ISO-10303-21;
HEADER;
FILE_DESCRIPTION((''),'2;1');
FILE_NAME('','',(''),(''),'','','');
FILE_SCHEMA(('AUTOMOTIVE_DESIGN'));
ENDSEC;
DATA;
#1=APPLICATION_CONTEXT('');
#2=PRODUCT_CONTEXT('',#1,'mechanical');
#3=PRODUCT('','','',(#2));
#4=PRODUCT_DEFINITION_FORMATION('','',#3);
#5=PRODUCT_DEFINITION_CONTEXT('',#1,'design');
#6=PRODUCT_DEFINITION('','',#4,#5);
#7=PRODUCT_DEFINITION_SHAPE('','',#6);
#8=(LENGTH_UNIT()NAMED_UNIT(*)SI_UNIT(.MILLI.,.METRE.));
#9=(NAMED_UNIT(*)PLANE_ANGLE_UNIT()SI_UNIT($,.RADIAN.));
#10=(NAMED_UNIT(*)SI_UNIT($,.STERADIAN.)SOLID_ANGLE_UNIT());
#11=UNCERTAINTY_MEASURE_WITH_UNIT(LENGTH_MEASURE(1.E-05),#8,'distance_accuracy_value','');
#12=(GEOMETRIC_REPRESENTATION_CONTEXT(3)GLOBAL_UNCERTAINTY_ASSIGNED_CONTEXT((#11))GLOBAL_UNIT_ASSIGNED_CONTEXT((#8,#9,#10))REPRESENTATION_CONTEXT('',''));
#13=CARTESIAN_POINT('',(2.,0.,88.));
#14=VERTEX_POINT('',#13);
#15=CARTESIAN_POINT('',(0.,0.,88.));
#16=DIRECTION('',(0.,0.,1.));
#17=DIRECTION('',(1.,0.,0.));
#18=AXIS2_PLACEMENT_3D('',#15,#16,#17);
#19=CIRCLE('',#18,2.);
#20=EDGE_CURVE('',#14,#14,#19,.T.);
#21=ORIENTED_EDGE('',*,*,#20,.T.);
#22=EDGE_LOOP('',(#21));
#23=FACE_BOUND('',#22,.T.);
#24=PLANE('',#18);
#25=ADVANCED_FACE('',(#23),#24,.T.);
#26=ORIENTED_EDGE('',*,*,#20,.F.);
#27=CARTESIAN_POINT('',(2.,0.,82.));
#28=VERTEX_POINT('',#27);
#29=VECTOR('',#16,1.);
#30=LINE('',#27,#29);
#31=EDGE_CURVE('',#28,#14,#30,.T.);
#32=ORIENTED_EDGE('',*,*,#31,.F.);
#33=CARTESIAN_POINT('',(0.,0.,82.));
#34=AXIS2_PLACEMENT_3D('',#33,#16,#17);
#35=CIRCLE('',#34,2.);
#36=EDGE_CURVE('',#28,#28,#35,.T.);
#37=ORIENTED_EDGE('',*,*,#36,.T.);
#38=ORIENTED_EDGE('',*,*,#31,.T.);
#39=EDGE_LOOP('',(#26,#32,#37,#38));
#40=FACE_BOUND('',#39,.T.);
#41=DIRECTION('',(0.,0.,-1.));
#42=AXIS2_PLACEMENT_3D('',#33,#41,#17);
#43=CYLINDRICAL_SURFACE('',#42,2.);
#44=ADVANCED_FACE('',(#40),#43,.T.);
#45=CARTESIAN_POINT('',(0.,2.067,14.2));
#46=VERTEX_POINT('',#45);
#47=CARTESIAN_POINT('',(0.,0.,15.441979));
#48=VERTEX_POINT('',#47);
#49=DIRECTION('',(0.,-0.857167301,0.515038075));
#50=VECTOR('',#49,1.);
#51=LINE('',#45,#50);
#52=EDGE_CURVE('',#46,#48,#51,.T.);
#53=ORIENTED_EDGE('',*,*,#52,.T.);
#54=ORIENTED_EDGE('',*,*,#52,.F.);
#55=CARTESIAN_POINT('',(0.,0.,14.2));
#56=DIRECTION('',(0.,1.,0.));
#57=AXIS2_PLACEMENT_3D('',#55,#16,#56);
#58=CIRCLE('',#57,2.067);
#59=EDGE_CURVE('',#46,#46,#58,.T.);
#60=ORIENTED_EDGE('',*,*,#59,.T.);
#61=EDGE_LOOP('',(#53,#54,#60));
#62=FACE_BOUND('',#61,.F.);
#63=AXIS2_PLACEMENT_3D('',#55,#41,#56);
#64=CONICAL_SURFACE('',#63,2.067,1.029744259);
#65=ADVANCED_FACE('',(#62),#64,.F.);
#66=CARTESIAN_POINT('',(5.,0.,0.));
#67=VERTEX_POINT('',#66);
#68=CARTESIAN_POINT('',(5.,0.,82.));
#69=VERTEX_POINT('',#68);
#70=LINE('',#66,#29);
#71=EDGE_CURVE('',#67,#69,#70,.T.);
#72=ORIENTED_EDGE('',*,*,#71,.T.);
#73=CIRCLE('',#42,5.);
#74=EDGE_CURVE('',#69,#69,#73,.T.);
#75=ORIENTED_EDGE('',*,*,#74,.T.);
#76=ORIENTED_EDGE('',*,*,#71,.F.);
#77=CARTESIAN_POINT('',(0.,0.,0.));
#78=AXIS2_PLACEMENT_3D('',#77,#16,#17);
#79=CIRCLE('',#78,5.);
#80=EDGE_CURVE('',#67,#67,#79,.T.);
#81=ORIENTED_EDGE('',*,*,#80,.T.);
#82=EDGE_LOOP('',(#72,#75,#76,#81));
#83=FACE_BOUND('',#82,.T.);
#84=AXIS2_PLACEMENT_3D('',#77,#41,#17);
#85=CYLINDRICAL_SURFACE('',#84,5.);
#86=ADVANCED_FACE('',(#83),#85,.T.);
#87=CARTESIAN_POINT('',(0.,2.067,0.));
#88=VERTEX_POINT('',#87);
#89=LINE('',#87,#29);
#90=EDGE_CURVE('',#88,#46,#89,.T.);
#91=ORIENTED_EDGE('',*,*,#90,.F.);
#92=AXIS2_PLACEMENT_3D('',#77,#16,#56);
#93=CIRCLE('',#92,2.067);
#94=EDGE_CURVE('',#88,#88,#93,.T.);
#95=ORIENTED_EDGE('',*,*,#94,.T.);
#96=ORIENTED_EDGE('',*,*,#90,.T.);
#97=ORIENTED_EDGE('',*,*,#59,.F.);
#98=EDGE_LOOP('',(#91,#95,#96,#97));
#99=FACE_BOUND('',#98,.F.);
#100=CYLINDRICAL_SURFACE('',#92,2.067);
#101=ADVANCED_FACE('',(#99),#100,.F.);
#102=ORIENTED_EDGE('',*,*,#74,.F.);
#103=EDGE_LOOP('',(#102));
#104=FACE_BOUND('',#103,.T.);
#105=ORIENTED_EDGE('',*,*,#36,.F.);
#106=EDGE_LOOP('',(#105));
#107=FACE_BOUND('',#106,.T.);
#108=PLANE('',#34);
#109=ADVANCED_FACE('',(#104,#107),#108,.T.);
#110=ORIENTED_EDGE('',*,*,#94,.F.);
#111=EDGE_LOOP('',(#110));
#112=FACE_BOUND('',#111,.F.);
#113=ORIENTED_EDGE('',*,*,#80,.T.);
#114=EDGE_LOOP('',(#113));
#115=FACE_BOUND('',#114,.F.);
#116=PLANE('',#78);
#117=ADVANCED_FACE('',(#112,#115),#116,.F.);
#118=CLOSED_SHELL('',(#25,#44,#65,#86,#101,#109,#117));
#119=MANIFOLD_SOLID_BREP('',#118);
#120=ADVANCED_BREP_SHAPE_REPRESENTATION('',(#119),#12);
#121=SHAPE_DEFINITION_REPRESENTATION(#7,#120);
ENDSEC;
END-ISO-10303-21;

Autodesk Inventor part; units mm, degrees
ref_plane "YZ Plane" through (0, 0, 0) normal (1, 0, 0) x (0, 1, 0)
ref_plane "XZ Plane" through (0, 0, 0) normal (0, 1, 0) x (-1, 0, 0)
ref_plane "XY Plane" through (0, 0, 0) normal (0, 0, 1) x (1, 0, 0)
sketch "Skizze1" plane through (0, 0, 0) normal (0, 0, 1) x (1, 0, 0)
  line L0 (-7, 0) -> (7, 0) projected
  line L1 (0, -7) -> (0, 7) projected
  circle A0 centre (0, 0) radius 5
  dimension "d0" = 10
extrude "Extrusion1" add sketch "Skizze1" along normal blind 82
sketch "Skizze2" plane through (0, 0, 82) normal (0, 0, 1) x (1, 0, 0)
  circle A0 centre (0, 0) radius 5 projected
  circle A1 centre (0, 0) radius 2
  dimension "d3" = 4
extrude "Extrusion2" add sketch "Skizze2" along normal blind 6 contours A1
thread "Gewinde1" size "M4x0.7" class "6g" standard "ANSI Metric M Profile" full length
sketch "Skizze3" plane through (0, 0, 0) normal (0, 0, -1) x (-1, 0, 0)
  circle A0 centre (0, 0) radius 5 projected
  circle A1 centre (0, 0) radius 2 projected
hole "Bohrung1" at (0, 0, 0) direction (0, 0, 1) diameter 4.134 depth 14.2 tip angle 118 thread size "M5x0.8" class "6H" standard "ISO Metric profile"
properties part number "24_0497_0011"
